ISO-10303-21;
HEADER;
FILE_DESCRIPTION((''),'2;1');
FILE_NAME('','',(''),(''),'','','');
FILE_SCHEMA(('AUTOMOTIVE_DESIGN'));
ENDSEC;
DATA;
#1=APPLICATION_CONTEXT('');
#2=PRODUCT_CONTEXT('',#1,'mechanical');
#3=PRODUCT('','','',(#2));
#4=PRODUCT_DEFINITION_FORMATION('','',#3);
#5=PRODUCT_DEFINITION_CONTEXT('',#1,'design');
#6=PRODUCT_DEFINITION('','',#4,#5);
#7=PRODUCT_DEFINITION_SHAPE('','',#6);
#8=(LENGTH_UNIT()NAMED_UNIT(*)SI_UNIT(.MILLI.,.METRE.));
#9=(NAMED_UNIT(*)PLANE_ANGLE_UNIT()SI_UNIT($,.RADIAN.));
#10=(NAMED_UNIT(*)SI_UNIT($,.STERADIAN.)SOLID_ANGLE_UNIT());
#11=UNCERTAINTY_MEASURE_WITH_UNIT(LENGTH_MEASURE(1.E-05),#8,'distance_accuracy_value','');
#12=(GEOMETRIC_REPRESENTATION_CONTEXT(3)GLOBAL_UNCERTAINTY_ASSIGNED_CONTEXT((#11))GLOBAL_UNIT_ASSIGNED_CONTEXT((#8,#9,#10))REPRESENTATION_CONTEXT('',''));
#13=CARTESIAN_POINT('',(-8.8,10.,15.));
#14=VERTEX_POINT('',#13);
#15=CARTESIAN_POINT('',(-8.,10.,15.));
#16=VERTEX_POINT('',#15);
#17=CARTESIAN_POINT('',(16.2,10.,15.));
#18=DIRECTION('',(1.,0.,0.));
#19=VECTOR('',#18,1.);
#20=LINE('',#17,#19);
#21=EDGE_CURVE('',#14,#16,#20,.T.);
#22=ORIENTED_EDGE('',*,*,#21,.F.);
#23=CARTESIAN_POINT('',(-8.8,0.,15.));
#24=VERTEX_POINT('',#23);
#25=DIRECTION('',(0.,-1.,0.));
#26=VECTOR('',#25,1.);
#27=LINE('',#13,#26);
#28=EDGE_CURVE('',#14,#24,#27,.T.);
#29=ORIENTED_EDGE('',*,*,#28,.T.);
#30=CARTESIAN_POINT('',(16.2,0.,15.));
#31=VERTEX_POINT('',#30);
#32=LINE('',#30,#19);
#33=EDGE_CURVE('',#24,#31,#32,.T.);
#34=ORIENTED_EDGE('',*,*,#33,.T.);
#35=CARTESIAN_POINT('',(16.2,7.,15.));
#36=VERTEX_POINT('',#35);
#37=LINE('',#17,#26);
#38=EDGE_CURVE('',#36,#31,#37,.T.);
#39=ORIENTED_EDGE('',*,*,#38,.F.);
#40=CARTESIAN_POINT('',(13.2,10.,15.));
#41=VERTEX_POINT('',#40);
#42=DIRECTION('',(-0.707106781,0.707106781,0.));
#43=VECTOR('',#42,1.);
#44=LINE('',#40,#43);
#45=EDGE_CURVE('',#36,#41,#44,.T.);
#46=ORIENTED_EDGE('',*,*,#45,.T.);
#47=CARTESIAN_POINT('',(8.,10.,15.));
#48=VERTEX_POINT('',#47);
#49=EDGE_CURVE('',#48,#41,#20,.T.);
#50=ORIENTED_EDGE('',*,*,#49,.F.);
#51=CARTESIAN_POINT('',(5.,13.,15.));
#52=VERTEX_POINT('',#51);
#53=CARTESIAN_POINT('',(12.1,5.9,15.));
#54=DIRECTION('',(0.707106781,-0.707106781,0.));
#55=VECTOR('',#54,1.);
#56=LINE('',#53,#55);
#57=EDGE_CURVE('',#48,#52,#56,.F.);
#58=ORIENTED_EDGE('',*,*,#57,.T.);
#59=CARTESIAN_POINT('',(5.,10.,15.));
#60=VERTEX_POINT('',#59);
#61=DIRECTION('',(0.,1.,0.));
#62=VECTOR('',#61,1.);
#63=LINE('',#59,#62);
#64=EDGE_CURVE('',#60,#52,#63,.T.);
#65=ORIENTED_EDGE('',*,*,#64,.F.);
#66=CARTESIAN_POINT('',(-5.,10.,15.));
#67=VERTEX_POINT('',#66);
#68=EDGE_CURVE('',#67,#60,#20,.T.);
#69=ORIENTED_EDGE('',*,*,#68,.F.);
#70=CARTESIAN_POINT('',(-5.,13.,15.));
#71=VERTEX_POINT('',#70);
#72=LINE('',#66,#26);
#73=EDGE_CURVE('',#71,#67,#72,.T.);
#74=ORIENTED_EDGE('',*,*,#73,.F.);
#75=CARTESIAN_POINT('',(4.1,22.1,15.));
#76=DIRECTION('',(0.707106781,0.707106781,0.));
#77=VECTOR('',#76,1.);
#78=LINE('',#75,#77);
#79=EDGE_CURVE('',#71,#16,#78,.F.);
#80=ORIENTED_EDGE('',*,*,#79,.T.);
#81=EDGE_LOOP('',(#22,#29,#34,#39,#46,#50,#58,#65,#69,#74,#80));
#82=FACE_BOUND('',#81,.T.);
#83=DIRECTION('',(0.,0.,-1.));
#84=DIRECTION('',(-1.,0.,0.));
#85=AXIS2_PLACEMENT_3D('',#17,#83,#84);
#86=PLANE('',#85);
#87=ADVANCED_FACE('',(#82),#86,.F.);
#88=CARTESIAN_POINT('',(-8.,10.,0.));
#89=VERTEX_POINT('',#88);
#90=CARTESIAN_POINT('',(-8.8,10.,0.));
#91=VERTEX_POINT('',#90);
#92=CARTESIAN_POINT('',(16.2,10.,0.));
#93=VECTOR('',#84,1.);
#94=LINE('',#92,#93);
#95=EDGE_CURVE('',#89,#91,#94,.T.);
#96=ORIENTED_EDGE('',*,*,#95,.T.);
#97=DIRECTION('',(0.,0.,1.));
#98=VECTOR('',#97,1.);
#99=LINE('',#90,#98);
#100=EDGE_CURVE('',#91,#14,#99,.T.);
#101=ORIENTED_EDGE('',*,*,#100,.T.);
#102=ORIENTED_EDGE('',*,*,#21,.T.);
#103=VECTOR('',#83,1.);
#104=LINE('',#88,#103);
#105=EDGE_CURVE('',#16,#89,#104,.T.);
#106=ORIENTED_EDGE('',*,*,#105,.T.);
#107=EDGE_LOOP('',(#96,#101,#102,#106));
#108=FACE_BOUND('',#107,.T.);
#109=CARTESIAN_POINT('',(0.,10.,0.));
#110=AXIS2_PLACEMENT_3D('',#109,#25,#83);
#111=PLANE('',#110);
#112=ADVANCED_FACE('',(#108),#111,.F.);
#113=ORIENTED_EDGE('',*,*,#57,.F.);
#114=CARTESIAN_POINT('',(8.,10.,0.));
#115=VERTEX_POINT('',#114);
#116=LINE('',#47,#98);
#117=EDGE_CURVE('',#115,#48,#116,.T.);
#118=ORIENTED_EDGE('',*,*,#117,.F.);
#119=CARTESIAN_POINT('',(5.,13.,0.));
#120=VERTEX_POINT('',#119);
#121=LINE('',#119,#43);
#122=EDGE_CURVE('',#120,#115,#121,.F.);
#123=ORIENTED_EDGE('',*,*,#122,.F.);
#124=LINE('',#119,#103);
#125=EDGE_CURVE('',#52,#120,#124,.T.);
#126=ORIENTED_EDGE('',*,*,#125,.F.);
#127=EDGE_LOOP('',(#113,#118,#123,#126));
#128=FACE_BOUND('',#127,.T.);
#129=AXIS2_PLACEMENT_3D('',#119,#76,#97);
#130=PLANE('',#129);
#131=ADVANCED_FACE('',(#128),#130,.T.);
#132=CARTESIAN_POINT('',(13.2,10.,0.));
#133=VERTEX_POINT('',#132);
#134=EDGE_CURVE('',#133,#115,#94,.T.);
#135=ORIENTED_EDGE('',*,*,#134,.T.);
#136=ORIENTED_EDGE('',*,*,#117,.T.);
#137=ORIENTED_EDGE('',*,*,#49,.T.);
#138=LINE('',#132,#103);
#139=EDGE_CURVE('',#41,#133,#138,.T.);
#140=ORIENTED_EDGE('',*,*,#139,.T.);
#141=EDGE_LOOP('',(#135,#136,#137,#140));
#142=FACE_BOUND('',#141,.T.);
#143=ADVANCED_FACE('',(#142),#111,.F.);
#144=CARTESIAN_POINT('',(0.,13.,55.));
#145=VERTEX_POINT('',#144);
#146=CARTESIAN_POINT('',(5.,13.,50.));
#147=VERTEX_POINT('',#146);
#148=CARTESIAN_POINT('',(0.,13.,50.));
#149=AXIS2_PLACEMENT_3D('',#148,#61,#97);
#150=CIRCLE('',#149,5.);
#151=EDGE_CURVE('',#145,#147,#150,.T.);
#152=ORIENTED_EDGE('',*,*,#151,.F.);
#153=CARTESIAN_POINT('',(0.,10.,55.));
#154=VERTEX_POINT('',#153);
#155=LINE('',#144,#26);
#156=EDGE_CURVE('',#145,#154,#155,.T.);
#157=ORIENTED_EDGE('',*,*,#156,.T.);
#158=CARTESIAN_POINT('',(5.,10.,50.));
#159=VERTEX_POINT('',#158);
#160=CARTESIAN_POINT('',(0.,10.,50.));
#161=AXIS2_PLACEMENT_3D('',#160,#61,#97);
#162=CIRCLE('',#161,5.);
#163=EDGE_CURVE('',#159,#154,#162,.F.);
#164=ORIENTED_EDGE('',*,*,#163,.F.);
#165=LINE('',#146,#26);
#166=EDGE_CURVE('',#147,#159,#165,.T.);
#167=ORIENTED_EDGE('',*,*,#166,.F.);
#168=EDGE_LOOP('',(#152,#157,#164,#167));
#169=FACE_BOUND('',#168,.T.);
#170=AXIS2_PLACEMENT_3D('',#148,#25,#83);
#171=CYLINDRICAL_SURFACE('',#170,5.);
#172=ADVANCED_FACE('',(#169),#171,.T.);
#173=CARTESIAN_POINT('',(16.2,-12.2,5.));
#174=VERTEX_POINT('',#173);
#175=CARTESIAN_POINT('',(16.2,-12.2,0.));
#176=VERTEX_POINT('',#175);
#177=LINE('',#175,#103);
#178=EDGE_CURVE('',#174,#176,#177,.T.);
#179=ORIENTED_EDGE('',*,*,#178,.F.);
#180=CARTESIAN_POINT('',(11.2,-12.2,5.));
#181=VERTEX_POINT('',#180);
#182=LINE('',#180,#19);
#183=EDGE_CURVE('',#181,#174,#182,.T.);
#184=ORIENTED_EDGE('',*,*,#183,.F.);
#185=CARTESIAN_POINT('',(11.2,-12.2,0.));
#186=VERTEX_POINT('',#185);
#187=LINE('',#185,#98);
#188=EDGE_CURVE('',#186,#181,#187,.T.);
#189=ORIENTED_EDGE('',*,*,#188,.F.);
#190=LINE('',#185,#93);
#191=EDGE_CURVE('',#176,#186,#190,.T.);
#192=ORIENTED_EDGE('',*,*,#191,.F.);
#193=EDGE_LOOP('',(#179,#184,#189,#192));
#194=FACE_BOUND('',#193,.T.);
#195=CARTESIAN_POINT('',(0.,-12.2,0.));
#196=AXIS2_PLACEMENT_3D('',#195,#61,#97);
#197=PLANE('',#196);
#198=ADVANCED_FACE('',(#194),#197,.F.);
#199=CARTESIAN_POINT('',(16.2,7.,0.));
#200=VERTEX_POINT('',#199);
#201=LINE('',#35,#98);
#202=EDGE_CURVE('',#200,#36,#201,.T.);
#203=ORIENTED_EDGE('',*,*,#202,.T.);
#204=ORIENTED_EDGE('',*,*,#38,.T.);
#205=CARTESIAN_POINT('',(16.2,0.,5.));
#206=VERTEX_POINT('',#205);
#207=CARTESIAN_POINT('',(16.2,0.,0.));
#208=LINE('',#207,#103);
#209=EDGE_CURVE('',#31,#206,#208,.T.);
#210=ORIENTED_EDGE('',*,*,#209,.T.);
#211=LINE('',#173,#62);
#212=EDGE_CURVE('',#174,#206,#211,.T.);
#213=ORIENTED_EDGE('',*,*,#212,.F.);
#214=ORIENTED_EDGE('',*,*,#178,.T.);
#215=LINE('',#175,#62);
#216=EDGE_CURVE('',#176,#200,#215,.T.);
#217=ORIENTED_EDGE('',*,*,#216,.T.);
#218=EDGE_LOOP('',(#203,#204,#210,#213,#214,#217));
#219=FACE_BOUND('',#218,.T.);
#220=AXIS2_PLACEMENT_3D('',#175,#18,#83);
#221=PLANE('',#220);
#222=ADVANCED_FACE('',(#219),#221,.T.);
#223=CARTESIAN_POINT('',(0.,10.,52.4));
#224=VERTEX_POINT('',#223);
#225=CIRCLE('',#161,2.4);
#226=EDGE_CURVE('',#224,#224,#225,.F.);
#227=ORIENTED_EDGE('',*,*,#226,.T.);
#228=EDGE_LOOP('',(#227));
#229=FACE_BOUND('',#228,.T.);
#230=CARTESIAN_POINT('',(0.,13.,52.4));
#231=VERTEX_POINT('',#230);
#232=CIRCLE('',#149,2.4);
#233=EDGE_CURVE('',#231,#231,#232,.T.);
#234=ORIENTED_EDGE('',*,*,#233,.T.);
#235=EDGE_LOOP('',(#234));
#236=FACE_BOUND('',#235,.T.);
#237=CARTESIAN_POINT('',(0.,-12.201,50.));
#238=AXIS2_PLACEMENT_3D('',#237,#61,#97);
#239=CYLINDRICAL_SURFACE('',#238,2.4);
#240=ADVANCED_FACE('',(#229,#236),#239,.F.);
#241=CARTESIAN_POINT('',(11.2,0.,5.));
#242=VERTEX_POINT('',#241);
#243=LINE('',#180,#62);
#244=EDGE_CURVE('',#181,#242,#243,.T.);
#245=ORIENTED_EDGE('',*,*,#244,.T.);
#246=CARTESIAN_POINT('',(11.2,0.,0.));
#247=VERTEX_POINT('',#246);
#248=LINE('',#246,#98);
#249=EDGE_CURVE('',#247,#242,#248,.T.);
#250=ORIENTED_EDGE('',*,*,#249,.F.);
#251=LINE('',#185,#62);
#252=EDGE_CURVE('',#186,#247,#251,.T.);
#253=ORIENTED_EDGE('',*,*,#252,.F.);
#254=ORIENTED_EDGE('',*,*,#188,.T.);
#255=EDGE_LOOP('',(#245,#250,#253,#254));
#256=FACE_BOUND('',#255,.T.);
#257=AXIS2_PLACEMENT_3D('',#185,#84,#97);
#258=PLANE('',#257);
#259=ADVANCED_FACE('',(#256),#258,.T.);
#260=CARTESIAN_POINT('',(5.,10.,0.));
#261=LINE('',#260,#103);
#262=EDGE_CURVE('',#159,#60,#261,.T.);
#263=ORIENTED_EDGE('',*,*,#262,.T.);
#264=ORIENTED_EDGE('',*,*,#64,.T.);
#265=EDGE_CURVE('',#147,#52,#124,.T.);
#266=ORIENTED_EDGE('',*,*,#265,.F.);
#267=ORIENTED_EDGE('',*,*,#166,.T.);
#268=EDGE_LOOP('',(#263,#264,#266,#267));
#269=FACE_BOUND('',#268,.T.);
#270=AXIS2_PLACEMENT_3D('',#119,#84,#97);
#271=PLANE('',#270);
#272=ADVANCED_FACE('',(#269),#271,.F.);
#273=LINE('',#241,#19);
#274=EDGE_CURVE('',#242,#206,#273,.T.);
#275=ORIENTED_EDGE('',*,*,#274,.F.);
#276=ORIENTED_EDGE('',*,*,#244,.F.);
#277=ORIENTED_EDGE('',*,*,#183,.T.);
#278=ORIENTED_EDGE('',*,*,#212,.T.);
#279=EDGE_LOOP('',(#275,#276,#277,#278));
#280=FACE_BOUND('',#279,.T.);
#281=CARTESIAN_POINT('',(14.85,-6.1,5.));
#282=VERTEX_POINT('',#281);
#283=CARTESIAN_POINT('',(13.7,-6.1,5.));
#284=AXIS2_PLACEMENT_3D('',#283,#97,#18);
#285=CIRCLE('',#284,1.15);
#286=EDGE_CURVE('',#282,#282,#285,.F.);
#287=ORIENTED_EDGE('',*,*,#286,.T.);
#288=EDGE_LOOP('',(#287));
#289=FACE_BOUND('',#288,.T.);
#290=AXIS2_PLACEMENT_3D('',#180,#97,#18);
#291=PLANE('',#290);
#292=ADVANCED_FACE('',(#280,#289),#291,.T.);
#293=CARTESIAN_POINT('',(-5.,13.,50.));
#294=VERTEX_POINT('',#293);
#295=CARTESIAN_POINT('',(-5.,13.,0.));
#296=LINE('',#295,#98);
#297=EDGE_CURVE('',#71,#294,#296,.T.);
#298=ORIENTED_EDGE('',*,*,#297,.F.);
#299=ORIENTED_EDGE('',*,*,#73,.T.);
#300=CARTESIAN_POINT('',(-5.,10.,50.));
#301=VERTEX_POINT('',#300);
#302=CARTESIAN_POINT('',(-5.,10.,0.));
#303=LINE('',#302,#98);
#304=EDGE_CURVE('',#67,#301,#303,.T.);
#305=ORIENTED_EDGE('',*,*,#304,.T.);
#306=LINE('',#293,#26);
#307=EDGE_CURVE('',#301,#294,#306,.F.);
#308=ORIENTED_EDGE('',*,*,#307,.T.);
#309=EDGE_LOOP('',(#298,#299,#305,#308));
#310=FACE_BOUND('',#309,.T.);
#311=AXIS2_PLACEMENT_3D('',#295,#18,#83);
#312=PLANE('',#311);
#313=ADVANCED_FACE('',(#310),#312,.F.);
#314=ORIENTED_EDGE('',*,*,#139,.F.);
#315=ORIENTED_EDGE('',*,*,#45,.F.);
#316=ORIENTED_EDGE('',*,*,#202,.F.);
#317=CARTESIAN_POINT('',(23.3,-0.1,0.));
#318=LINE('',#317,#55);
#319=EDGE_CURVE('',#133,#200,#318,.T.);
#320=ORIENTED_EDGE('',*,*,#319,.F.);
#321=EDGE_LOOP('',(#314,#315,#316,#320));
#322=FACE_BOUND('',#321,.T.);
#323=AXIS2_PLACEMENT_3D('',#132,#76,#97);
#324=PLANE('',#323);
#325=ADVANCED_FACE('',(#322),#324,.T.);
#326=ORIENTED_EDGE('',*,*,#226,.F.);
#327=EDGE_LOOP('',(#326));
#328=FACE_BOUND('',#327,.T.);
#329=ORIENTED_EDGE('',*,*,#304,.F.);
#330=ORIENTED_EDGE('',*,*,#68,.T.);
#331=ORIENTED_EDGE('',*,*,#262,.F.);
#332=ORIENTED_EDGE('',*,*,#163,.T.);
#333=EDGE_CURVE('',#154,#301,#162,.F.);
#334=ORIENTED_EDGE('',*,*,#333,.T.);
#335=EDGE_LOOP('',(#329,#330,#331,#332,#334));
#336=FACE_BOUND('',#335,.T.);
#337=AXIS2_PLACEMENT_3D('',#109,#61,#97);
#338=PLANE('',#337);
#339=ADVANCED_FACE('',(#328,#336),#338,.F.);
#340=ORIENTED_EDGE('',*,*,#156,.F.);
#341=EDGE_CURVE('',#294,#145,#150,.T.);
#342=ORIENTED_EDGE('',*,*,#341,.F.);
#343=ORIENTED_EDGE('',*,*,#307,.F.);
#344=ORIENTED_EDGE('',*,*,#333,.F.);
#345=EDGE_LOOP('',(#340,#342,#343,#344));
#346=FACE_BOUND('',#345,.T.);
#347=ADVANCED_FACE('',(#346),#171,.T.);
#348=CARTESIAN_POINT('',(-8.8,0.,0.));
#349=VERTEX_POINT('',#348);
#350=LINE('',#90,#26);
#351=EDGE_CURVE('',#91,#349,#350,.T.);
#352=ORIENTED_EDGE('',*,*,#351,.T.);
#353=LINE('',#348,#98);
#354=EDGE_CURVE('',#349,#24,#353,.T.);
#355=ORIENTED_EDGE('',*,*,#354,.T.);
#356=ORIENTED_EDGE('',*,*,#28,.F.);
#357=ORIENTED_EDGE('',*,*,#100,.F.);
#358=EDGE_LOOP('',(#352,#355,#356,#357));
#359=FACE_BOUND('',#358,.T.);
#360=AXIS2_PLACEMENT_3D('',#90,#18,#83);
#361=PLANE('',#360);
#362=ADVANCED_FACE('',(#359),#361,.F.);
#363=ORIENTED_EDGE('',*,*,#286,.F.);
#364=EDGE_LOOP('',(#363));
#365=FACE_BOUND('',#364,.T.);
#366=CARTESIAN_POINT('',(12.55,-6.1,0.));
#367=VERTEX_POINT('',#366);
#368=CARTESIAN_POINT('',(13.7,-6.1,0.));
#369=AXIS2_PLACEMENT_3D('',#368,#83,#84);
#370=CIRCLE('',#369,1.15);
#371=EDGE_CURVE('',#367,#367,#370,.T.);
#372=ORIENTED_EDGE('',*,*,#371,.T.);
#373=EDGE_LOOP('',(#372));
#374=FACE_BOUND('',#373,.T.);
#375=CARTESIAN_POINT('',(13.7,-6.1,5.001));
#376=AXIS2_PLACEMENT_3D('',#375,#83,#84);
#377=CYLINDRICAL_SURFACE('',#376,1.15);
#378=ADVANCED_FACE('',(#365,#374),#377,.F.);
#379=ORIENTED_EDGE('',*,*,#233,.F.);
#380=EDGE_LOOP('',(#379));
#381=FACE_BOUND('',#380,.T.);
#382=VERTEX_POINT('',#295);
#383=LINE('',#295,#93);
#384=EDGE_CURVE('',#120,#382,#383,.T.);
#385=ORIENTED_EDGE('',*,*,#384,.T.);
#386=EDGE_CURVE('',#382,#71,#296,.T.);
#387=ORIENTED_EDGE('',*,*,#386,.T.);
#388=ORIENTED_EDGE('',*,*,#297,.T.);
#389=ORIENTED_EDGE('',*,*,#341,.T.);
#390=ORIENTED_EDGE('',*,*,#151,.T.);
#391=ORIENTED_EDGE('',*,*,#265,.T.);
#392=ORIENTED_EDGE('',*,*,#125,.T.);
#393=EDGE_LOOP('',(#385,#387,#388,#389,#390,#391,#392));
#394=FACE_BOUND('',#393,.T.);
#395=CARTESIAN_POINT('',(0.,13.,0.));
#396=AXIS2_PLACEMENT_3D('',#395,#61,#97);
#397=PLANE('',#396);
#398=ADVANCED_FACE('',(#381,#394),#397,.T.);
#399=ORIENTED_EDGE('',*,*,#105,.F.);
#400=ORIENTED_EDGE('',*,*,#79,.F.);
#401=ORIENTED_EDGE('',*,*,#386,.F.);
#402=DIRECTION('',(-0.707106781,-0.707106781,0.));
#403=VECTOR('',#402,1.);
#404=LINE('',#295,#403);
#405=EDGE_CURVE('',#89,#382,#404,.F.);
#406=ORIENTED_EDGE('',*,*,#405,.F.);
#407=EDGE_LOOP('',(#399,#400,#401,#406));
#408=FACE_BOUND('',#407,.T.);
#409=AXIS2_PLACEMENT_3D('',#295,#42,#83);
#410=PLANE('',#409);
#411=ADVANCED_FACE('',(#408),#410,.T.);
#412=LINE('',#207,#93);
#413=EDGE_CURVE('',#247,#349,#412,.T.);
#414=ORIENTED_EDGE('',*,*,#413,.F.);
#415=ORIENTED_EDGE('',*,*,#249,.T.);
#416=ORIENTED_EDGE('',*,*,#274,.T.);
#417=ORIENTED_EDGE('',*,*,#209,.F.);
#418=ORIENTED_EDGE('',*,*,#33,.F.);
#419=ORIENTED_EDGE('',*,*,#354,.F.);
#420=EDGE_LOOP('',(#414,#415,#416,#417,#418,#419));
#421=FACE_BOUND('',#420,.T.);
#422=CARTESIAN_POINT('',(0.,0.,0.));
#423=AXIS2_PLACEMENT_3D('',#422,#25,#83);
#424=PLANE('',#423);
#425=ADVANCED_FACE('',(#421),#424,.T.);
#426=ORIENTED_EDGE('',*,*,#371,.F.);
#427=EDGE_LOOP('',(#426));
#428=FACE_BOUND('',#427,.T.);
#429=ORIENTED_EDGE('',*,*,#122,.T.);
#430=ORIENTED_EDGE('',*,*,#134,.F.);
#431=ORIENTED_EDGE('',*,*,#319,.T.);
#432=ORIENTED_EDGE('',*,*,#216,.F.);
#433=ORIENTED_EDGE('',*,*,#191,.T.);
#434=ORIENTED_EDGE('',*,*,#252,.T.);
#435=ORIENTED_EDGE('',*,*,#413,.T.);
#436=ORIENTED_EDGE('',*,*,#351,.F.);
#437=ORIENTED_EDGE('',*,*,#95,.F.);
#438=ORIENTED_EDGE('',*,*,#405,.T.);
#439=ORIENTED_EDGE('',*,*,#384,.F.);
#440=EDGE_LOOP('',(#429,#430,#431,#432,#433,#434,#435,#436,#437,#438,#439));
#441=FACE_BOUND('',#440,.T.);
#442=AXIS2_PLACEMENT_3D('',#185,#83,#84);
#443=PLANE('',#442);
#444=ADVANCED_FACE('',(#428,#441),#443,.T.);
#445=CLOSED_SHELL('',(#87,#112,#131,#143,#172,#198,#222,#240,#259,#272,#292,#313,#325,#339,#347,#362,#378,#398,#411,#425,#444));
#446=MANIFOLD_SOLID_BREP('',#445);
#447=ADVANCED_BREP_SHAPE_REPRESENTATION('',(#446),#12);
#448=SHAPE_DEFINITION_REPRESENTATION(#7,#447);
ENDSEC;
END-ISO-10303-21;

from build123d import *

# Parameters (mm, degrees)
SKETCH1_W                    = 5
SKETCH1_H                    = 5
SERVO_MOUNT_DEPTH            = 12.2
SERVO_MOUNT_SCREW_HOLE_REACH = 22.887
SKETCH2_R                    = 1.15
SKETCH3_W                    = 25
SKETCH3_H                    = 15
SERVO_RETAINING_PLATE_DEPTH  = 10
SKETCH5_W                    = 10
SKETCH5_H                    = 55
NECK_DEPTH                   = 3
NECK_FILLET1_R               = 5
LOWER_SERVO_MOUNT_HOLE_REACH = 64.63
SKETCH6_R                    = 2.4
CHAMFER1_SIZE                = 3


# Some blends are built 0.0001 mm under size
with BuildPart() as part:
    # Sketch1 → servo mount (new body)
    with BuildSketch(Plane(origin=(0, 0, 0), x_dir=(1, 0, 0), z_dir=(0, 1, 0))):
        with Locations((13.7, -2.5)):
            Rectangle(SKETCH1_W, SKETCH1_H)
    extrude(amount=-SERVO_MOUNT_DEPTH)

    # Sketch2 → servo mount screw hole (cut, up to next)
    with BuildSketch(Plane(origin=(0, 0, 0), x_dir=(-1, 0, 0), z_dir=(0, 0, -1)), mode=Mode.PRIVATE) as servo_mount_screw_hole_sk1:
        with Locations((-13.7, -6.1)):
            Circle(SKETCH2_R)
    servo_mount_screw_hole_tool1 = extrude(servo_mount_screw_hole_sk1.sketch, amount=-SERVO_MOUNT_SCREW_HOLE_REACH, mode=Mode.PRIVATE) & part.part
    add(servo_mount_screw_hole_tool1.solids().sort_by_distance((13.7, -6.1, 0))[0], mode=Mode.SUBTRACT)

    # Sketch3 → servo retaining plate (add)
    with BuildSketch(Plane(origin=(0, 0, 0), x_dir=(1, 0, 0), z_dir=(0, 1, 0))):
        with Locations((3.7, -7.5)):
            Rectangle(SKETCH3_W, SKETCH3_H)
    extrude(amount=SERVO_RETAINING_PLATE_DEPTH)

    # Sketch5 → neck (add)
    with BuildSketch(Plane(origin=(0, 10, 0), x_dir=(1, 0, 0), z_dir=(0, 1, 0))):
        with Locations((0, -27.5)):
            Rectangle(SKETCH5_W, SKETCH5_H)
    extrude(amount=NECK_DEPTH)

    # neck fillet1
    neck_fillet1_edges = [part.edges().sort_by_distance(p)[0] for p in [
        (5, 11.5, 55),
        (-5, 11.5, 55),
    ]]
    fillet(neck_fillet1_edges, radius=NECK_FILLET1_R - 0.0001)  # a hair under: the kernel refuses the full size

    # Sketch6 → lower servo mount hole (cut, up to next)
    with BuildSketch(Plane(origin=(0, 13, 0), x_dir=(1, 0, 0), z_dir=(0, 1, 0)), mode=Mode.PRIVATE) as lower_servo_mount_hole_sk1:
        with Locations(Location((0, -50, 0), (0, 0, 270))):
            Circle(SKETCH6_R)
    lower_servo_mount_hole_tool1 = extrude(lower_servo_mount_hole_sk1.sketch, amount=-LOWER_SERVO_MOUNT_HOLE_REACH, mode=Mode.PRIVATE) & part.part
    add(lower_servo_mount_hole_tool1.solids().sort_by_distance((0, 13, 50))[0], mode=Mode.SUBTRACT)

    # Chamfer1
    # the kernel refuses this chamfer: 3 mm, written as the material it adds along each edge
    with BuildSketch(Plane(origin=(-5, 10, 15), x_dir=(0.027495876610586494, 0.9996219169112968, 0), z_dir=(0, 0, -1)), Plane(origin=(5, 10, 0), x_dir=(-0.027495876610586494, 0.9996219169112968, 0), z_dir=(0, 0, 1))) as chamfer1_piece_1:
        Polygon((CHAMFER1_SIZE * 0.999621916911, -CHAMFER1_SIZE * 0.0274958766106), (-CHAMFER1_SIZE * 0.0274958766106, -CHAMFER1_SIZE * 0.999621916911), (0, 0), align=None)
    extrude(amount=15)
    # the kernel refuses this chamfer: 3 mm, written as the material it takes off along each edge
    with BuildSketch(Plane(origin=(16.2, 10, 22.715048964), x_dir=(0.027495876610586775, -0.9996219169112968, 0), z_dir=(0, 0, -1))) as chamfer1_2_piece_1:
        Polygon((CHAMFER1_SIZE * 0.999621916911, CHAMFER1_SIZE * 0.0274958766106), (-CHAMFER1_SIZE * 0.0274958766106, CHAMFER1_SIZE * 0.999621916911), (0, 0), align=None)
    extrude(amount=30.430097928, mode=Mode.SUBTRACT)


solid = part.part
